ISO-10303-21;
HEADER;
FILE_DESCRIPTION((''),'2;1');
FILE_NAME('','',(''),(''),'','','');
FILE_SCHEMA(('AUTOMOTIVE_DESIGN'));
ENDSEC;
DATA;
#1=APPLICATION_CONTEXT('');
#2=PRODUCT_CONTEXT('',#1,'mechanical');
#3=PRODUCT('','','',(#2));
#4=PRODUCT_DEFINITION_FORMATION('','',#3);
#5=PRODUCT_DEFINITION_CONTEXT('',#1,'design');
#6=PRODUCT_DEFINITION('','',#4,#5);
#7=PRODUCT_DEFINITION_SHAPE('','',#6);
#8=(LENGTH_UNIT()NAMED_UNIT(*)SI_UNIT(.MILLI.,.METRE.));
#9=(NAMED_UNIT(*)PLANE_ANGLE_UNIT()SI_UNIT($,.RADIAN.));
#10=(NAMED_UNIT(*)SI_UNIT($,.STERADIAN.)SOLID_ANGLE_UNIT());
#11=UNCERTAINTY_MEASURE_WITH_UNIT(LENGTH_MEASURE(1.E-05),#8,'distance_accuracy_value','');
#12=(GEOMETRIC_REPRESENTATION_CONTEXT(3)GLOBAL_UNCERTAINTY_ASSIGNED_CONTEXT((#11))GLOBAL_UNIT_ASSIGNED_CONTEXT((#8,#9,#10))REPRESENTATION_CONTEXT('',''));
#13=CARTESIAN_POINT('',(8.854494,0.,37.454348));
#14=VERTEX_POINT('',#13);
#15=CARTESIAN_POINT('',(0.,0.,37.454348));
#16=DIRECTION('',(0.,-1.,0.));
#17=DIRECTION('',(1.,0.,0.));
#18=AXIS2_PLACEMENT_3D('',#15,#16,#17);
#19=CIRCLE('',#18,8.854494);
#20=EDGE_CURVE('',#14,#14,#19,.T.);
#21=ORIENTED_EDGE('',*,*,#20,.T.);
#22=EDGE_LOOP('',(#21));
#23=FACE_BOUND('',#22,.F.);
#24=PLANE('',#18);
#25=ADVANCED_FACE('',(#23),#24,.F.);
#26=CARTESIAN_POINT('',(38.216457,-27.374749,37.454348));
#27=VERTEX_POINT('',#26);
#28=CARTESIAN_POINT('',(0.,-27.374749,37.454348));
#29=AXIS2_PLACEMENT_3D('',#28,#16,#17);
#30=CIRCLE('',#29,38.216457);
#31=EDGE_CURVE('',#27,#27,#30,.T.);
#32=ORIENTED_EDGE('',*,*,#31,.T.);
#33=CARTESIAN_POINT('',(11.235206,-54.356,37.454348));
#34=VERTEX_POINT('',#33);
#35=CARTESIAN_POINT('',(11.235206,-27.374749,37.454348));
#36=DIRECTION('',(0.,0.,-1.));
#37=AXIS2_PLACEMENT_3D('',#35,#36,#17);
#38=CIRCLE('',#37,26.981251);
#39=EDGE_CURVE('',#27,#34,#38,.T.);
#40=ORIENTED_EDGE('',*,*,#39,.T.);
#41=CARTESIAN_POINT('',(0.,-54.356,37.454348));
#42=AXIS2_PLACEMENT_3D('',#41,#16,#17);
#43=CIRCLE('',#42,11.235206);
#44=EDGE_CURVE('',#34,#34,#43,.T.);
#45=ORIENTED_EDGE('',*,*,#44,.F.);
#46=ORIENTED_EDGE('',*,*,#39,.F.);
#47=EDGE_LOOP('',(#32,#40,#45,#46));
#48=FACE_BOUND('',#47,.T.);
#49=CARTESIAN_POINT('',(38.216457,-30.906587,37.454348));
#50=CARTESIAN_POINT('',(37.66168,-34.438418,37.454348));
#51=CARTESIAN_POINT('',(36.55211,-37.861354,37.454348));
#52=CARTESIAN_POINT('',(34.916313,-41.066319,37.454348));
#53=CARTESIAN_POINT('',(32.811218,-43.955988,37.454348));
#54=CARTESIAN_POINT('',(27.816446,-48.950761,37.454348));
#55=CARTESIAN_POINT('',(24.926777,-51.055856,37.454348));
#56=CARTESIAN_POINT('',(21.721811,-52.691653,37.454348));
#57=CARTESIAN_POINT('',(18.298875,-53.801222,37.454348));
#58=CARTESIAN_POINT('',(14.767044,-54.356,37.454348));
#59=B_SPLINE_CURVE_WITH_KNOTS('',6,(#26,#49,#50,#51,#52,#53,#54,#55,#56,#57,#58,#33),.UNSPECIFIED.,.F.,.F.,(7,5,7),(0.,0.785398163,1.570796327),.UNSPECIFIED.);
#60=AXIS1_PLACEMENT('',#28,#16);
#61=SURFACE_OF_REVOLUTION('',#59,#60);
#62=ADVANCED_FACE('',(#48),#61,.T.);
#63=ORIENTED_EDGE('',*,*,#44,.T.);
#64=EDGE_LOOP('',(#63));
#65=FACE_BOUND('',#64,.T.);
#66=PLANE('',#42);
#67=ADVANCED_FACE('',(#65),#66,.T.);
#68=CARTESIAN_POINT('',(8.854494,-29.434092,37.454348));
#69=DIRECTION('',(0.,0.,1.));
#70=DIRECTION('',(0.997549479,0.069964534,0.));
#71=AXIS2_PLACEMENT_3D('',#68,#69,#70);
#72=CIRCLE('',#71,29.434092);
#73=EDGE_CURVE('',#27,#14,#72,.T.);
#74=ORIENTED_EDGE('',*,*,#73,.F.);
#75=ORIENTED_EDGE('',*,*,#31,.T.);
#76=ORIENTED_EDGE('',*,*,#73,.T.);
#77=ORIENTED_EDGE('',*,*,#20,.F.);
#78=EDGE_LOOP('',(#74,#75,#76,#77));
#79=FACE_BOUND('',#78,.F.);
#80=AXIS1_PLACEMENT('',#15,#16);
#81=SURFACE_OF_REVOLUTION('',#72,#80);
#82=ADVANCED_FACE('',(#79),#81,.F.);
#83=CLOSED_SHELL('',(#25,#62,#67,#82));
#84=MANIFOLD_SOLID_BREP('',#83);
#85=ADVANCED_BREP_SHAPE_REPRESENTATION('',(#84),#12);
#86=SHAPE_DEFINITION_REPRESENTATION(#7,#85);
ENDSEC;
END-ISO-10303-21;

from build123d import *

# Parameters (mm, degrees)
F0_R     = 38.216457182
F1_DEPTH = 54.356
F2_R     = 26.9812507731


# Not quite as in the source:
# - a fillet or chamfer that OpenCascade refuses, or shapes differently, is made with other operations: its cross-section is extruded or revolved along the edge and cut away or added


with BuildPart() as f1:
    # F0 (on Front) → F1 (new body)
    with BuildSketch(Plane.XZ):
        with Locations((0, 37.4543480575)):
            Circle(F0_R)
    extrude(amount=F1_DEPTH)

    # F2
    f2_edges = [f1.edges().sort_by_distance(p)[0] for p in [
        (-38.216457, -54.356, 37.454348),
    ]]
    fillet(f2_edges, radius=F2_R)

    # F3: fillet of radius 29.4340917525 on 1 edges, made by hand

    # F3_s1 → F3_t2 (revolve, cut)
    with BuildSketch(Plane.XY.offset(37.4543480575)):
        with BuildLine():
            ThreePointArc((38.216457182, -27.3747492269), (28.9262515546, -7.9052664926), (8.8544942767, 0))
            Line((8.8544942767, 0), (8.8544942767, 0.588681835))
            Line((8.8544942767, 0.588681835), (38.216457182, 0.588681835))
            Line((38.216457182, 0.588681835), (38.8051390171, 0))
            ThreePointArc((38.8051390171, 0), (38.8051390171, -13.6873746135), (38.8036964401, -27.3335623764))
            Line((38.8036964401, -27.3335623764), (38.216457182, -27.3747492269))
        make_face()
    revolve(axis=Axis((0, 0, 37.4543480575), (0, -1, 0)), mode=Mode.SUBTRACT)


solid = f1.part
